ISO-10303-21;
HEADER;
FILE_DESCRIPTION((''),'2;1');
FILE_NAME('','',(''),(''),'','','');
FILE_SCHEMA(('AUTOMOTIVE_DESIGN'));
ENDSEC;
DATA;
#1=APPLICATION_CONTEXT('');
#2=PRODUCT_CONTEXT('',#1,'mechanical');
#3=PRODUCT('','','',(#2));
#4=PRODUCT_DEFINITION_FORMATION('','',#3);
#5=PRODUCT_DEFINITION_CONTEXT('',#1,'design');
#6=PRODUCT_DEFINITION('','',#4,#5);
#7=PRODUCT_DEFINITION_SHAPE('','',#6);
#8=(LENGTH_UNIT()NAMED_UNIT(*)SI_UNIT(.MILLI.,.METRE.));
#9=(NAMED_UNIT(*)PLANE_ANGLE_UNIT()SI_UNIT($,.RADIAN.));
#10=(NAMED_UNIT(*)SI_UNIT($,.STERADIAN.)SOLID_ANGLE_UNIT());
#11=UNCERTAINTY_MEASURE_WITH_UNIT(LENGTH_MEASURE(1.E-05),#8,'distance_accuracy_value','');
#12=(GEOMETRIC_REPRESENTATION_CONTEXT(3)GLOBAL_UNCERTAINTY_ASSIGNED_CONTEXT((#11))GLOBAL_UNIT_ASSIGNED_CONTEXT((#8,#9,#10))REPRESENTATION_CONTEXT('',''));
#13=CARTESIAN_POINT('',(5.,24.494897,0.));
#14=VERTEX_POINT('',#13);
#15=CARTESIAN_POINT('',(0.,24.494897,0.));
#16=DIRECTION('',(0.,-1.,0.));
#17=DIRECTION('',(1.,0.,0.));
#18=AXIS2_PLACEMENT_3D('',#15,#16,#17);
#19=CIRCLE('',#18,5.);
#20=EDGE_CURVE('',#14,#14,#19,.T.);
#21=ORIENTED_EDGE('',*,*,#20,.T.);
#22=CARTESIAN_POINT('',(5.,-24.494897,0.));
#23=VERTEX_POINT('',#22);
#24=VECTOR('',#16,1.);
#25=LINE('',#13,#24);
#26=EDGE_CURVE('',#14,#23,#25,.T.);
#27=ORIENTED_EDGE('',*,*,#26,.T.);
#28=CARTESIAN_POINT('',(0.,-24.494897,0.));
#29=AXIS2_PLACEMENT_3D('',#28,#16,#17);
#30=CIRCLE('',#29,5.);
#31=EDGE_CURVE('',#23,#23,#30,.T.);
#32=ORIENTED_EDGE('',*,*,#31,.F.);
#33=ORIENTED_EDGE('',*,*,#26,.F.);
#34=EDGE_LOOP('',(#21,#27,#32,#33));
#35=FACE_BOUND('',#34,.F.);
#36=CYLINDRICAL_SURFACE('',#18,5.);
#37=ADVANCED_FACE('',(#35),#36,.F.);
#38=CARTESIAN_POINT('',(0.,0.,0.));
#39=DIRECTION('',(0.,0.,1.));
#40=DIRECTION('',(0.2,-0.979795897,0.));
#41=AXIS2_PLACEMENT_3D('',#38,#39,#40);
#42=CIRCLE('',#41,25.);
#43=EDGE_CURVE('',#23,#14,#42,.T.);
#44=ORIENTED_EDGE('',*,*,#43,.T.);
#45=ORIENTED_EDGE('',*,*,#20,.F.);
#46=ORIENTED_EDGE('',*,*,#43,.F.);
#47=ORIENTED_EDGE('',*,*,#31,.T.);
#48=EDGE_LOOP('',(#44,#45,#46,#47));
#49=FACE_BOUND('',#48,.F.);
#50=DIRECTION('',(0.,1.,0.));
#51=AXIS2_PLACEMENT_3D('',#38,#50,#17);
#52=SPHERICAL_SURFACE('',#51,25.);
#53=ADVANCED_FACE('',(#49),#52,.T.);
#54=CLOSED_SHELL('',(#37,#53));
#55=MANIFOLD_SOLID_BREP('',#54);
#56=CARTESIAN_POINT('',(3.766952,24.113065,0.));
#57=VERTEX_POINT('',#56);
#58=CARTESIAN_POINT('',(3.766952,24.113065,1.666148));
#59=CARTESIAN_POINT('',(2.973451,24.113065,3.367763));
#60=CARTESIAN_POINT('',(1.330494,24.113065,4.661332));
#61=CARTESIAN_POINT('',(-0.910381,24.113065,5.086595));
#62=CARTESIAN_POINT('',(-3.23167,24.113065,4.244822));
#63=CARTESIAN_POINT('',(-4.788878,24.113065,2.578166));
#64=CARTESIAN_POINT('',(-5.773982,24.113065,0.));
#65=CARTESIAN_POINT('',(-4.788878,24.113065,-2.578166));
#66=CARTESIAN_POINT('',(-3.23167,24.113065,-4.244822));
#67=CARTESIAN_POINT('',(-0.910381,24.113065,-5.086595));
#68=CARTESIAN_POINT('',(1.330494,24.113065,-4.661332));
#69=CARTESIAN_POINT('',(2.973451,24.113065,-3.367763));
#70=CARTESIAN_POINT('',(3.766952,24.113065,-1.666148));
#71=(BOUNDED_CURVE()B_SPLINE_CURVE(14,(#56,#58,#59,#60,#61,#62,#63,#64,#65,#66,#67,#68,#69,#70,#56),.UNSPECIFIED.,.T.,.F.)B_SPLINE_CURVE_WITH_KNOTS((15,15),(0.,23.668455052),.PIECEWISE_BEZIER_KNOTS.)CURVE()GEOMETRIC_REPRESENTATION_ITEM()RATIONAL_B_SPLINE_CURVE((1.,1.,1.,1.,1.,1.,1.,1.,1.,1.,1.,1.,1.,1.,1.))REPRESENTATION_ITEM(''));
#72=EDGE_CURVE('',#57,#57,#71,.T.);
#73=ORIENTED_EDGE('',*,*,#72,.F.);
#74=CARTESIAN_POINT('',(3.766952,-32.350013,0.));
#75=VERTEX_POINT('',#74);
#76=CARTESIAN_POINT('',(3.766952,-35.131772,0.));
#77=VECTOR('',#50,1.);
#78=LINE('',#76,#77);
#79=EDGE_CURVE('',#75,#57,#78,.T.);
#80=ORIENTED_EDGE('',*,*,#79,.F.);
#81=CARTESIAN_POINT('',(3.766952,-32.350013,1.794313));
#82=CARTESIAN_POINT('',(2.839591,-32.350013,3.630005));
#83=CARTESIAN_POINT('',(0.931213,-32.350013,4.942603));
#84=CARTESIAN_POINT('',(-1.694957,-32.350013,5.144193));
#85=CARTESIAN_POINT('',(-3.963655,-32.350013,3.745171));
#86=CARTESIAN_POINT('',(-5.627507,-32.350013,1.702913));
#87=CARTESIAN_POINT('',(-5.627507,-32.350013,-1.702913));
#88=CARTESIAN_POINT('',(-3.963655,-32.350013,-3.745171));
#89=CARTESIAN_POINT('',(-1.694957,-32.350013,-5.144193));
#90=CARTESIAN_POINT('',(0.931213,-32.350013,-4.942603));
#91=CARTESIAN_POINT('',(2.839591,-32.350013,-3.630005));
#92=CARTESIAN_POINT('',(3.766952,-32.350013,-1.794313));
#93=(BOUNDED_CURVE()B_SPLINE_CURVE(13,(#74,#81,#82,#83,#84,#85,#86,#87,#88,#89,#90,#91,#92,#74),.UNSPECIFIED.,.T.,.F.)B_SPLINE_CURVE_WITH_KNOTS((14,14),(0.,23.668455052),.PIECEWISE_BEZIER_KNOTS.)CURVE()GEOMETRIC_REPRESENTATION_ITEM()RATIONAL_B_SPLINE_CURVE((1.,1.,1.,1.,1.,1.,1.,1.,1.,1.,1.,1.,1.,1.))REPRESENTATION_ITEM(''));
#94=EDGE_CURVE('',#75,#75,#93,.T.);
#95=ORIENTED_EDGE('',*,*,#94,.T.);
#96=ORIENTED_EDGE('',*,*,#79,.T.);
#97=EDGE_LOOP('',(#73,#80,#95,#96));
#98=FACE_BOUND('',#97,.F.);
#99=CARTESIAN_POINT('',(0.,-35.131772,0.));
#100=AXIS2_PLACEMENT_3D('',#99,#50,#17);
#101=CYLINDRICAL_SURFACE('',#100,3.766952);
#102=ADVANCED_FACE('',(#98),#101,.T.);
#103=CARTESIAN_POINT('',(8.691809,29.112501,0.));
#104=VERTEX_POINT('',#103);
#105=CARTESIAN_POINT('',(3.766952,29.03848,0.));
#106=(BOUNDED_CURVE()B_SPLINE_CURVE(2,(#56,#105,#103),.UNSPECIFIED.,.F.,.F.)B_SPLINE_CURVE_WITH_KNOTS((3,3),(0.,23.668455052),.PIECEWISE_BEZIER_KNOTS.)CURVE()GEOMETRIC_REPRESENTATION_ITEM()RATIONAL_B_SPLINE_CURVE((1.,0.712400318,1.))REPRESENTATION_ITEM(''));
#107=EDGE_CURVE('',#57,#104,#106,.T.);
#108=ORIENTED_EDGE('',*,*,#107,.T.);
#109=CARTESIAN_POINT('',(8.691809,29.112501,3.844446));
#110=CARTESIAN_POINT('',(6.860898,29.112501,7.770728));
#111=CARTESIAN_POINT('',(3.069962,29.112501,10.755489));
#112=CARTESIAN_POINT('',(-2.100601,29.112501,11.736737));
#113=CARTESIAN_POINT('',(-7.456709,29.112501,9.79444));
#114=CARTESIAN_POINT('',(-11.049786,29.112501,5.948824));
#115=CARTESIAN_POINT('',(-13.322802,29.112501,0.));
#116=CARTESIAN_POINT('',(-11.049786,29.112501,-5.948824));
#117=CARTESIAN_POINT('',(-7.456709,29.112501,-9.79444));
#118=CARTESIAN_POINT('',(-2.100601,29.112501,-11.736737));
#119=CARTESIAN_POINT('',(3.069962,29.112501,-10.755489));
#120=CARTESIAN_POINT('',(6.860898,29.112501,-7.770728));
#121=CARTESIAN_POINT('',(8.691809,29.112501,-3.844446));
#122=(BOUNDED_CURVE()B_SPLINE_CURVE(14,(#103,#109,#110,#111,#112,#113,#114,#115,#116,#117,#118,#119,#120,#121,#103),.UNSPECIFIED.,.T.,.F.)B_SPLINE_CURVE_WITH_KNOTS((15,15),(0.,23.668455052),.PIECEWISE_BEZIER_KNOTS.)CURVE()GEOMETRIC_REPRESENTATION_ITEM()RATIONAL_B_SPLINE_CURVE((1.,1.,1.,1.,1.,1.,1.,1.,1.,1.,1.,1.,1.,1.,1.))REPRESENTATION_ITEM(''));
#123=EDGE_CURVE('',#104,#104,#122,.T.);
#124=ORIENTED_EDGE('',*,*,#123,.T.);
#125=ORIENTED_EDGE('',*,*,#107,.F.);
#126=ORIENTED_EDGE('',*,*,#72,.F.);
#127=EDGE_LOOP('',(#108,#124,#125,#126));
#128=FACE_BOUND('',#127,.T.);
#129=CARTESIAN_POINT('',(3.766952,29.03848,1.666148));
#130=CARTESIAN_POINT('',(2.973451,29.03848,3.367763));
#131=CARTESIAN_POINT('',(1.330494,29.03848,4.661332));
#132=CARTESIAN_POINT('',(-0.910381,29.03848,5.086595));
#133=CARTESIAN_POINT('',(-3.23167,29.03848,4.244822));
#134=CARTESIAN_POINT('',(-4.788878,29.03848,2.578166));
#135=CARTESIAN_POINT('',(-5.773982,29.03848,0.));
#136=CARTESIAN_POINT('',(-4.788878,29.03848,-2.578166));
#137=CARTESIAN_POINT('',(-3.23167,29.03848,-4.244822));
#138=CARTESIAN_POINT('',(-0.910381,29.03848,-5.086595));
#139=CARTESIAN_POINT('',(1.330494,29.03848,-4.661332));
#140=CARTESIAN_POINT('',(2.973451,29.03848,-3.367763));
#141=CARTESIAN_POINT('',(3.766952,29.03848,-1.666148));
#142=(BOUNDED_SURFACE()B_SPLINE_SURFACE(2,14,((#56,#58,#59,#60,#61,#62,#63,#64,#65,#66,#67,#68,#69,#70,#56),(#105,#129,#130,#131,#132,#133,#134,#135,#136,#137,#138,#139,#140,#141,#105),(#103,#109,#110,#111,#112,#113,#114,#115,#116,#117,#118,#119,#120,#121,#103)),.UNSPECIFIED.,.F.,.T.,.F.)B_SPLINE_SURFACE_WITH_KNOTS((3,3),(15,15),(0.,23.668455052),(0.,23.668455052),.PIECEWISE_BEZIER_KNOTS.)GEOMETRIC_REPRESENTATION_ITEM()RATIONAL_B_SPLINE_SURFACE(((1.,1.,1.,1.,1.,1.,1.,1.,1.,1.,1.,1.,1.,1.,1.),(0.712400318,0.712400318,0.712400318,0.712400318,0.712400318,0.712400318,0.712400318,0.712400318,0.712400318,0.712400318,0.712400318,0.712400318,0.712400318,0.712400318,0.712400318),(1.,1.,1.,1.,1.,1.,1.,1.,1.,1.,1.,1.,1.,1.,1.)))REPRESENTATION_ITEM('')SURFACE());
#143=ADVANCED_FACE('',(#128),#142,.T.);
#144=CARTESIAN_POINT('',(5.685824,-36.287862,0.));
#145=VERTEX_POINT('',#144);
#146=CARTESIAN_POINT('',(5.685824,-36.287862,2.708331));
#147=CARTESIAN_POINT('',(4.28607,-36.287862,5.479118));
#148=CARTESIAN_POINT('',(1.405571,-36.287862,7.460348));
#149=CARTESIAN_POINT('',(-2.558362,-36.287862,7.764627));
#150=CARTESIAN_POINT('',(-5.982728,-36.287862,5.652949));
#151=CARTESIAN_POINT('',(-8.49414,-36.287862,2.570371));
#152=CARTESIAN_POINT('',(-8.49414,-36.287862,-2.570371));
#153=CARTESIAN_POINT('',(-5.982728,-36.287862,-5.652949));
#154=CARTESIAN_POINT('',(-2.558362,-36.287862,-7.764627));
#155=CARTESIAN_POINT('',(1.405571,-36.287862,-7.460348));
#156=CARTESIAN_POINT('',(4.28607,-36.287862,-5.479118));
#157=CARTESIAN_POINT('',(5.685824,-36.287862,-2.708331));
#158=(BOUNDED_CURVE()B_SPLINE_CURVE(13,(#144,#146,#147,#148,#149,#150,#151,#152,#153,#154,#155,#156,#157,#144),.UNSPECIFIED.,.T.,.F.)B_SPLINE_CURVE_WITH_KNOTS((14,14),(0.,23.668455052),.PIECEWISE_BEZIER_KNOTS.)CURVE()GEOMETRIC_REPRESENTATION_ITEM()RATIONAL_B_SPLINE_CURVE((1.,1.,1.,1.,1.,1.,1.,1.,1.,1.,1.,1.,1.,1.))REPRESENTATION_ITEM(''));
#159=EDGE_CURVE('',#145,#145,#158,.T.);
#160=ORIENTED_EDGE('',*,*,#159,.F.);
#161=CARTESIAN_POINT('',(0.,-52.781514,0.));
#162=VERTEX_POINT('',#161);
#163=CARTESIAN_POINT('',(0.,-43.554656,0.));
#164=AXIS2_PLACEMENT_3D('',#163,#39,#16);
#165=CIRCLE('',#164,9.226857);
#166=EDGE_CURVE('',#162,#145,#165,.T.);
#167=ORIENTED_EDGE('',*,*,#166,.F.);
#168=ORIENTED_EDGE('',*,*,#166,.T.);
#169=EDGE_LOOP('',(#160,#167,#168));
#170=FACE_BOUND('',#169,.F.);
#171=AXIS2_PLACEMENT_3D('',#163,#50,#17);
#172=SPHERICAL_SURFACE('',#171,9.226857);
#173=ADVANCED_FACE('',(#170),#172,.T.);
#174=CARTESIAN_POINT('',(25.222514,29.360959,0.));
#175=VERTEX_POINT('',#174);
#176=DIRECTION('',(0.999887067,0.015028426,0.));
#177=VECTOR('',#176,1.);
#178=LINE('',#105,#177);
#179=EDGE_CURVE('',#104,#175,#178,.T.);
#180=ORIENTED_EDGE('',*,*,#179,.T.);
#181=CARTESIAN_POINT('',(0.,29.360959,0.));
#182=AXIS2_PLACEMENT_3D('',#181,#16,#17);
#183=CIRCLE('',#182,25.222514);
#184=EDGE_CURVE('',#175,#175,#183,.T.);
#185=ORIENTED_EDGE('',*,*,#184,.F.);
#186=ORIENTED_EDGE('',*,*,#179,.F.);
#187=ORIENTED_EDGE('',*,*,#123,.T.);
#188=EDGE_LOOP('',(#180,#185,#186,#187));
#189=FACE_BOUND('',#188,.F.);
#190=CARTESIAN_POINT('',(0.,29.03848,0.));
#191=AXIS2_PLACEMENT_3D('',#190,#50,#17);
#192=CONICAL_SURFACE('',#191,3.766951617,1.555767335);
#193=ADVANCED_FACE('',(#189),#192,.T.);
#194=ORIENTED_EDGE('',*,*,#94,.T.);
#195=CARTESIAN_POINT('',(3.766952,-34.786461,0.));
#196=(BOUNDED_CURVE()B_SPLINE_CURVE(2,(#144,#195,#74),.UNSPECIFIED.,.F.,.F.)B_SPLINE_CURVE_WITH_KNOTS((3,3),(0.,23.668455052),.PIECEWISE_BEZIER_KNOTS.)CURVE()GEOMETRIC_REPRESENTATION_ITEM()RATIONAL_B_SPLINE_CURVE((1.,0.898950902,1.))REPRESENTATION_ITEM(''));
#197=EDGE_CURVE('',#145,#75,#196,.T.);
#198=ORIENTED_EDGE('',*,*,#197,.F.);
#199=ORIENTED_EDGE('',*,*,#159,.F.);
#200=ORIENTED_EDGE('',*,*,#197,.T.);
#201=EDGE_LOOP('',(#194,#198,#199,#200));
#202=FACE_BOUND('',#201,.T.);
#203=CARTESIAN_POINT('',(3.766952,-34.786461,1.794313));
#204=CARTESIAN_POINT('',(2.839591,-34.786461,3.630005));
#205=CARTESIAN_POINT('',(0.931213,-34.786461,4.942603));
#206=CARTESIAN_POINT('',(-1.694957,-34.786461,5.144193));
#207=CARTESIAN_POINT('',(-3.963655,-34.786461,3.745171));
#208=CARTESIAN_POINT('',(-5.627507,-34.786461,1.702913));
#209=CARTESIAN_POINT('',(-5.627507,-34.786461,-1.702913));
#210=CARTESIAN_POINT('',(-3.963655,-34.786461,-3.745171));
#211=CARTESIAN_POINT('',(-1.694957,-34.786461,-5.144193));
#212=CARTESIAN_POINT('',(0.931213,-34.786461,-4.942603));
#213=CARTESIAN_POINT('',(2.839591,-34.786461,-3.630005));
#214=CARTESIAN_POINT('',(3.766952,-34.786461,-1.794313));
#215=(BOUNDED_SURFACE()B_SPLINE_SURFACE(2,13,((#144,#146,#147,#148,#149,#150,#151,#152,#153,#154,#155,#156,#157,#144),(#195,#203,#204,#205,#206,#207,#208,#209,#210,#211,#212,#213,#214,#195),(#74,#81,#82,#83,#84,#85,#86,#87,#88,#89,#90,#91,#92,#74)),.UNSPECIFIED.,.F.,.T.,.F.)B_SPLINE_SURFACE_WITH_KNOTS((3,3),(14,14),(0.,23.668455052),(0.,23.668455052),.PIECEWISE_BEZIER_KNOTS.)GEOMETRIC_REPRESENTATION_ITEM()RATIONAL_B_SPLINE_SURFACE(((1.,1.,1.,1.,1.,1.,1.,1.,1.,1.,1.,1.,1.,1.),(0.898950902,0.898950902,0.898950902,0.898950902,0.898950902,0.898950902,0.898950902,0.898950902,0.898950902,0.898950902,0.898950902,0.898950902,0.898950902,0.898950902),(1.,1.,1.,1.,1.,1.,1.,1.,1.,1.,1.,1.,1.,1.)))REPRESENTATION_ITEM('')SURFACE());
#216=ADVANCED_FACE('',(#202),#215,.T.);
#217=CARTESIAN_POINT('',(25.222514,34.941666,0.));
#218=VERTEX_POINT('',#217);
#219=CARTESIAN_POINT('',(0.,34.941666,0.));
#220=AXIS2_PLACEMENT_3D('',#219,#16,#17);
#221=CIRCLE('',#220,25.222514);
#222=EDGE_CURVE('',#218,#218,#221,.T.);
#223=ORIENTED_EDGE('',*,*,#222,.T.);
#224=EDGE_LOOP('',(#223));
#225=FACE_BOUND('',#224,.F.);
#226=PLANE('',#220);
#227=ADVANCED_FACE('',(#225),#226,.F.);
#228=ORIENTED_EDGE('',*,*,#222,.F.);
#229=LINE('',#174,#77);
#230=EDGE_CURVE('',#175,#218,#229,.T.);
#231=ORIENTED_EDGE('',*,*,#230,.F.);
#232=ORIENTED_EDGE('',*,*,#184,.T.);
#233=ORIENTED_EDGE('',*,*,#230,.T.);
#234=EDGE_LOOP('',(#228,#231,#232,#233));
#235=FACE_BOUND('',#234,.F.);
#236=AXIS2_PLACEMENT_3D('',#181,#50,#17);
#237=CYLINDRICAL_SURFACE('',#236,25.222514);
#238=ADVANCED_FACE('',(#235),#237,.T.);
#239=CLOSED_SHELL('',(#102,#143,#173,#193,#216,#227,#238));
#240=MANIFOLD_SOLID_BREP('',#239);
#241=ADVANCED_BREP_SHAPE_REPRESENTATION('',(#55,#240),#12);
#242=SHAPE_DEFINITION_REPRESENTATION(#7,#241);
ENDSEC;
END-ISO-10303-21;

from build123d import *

# Parameters (mm, degrees)
F3_R = 5


with BuildPart() as f1:
    # F0 (on Top) → F1 (revolve)
    with BuildSketch(Plane.XY):
        with BuildLine():
            Line((5, 24.4948974278), (5, -24.4948974278))
            ThreePointArc((5, -24.4948974278), (25, 0), (5, 24.4948974278))
        make_face()
    revolve(axis=Axis((0, 0, 0), (0, -1, 0)))


with BuildPart() as f2:
    # F0 (on Top) → F2 (revolve)
    with BuildSketch(Plane.XY):
        with BuildLine():
            Line((0, 34.9416658282), (0, 25))
            Line((0, 25), (0, -25))
            Line((0, -25), (0, -43.5546562076))
            Line((0, -43.5546562076), (0, -52.7815136387))
            ThreePointArc((0, -52.7815136387), (9.0236258557, -45.4805519658), (3.7669516169, -35.1317722851))
            Line((3.7669516169, -35.1317722851), (3.7669516169, 29.0384795517))
            Line((3.7669516169, 29.0384795517), (25.2225138247, 29.3609593064))
            Line((25.2225138247, 29.3609593064), (25.2225138247, 34.9416658282))
            Line((25.2225138247, 34.9416658282), (0, 34.9416658282))
        make_face()
    revolve(axis=Axis((0, 0, 0), (0, -1, 0)))

    # F3
    f3_edges = [f2.edges().sort_by_distance(p)[0] for p in [
        (-3.766952, 29.03848, 0),
        (-3.766952, -35.131772, 0),
    ]]
    fillet(f3_edges, radius=F3_R)


solid = Compound([f1.part, f2.part])
